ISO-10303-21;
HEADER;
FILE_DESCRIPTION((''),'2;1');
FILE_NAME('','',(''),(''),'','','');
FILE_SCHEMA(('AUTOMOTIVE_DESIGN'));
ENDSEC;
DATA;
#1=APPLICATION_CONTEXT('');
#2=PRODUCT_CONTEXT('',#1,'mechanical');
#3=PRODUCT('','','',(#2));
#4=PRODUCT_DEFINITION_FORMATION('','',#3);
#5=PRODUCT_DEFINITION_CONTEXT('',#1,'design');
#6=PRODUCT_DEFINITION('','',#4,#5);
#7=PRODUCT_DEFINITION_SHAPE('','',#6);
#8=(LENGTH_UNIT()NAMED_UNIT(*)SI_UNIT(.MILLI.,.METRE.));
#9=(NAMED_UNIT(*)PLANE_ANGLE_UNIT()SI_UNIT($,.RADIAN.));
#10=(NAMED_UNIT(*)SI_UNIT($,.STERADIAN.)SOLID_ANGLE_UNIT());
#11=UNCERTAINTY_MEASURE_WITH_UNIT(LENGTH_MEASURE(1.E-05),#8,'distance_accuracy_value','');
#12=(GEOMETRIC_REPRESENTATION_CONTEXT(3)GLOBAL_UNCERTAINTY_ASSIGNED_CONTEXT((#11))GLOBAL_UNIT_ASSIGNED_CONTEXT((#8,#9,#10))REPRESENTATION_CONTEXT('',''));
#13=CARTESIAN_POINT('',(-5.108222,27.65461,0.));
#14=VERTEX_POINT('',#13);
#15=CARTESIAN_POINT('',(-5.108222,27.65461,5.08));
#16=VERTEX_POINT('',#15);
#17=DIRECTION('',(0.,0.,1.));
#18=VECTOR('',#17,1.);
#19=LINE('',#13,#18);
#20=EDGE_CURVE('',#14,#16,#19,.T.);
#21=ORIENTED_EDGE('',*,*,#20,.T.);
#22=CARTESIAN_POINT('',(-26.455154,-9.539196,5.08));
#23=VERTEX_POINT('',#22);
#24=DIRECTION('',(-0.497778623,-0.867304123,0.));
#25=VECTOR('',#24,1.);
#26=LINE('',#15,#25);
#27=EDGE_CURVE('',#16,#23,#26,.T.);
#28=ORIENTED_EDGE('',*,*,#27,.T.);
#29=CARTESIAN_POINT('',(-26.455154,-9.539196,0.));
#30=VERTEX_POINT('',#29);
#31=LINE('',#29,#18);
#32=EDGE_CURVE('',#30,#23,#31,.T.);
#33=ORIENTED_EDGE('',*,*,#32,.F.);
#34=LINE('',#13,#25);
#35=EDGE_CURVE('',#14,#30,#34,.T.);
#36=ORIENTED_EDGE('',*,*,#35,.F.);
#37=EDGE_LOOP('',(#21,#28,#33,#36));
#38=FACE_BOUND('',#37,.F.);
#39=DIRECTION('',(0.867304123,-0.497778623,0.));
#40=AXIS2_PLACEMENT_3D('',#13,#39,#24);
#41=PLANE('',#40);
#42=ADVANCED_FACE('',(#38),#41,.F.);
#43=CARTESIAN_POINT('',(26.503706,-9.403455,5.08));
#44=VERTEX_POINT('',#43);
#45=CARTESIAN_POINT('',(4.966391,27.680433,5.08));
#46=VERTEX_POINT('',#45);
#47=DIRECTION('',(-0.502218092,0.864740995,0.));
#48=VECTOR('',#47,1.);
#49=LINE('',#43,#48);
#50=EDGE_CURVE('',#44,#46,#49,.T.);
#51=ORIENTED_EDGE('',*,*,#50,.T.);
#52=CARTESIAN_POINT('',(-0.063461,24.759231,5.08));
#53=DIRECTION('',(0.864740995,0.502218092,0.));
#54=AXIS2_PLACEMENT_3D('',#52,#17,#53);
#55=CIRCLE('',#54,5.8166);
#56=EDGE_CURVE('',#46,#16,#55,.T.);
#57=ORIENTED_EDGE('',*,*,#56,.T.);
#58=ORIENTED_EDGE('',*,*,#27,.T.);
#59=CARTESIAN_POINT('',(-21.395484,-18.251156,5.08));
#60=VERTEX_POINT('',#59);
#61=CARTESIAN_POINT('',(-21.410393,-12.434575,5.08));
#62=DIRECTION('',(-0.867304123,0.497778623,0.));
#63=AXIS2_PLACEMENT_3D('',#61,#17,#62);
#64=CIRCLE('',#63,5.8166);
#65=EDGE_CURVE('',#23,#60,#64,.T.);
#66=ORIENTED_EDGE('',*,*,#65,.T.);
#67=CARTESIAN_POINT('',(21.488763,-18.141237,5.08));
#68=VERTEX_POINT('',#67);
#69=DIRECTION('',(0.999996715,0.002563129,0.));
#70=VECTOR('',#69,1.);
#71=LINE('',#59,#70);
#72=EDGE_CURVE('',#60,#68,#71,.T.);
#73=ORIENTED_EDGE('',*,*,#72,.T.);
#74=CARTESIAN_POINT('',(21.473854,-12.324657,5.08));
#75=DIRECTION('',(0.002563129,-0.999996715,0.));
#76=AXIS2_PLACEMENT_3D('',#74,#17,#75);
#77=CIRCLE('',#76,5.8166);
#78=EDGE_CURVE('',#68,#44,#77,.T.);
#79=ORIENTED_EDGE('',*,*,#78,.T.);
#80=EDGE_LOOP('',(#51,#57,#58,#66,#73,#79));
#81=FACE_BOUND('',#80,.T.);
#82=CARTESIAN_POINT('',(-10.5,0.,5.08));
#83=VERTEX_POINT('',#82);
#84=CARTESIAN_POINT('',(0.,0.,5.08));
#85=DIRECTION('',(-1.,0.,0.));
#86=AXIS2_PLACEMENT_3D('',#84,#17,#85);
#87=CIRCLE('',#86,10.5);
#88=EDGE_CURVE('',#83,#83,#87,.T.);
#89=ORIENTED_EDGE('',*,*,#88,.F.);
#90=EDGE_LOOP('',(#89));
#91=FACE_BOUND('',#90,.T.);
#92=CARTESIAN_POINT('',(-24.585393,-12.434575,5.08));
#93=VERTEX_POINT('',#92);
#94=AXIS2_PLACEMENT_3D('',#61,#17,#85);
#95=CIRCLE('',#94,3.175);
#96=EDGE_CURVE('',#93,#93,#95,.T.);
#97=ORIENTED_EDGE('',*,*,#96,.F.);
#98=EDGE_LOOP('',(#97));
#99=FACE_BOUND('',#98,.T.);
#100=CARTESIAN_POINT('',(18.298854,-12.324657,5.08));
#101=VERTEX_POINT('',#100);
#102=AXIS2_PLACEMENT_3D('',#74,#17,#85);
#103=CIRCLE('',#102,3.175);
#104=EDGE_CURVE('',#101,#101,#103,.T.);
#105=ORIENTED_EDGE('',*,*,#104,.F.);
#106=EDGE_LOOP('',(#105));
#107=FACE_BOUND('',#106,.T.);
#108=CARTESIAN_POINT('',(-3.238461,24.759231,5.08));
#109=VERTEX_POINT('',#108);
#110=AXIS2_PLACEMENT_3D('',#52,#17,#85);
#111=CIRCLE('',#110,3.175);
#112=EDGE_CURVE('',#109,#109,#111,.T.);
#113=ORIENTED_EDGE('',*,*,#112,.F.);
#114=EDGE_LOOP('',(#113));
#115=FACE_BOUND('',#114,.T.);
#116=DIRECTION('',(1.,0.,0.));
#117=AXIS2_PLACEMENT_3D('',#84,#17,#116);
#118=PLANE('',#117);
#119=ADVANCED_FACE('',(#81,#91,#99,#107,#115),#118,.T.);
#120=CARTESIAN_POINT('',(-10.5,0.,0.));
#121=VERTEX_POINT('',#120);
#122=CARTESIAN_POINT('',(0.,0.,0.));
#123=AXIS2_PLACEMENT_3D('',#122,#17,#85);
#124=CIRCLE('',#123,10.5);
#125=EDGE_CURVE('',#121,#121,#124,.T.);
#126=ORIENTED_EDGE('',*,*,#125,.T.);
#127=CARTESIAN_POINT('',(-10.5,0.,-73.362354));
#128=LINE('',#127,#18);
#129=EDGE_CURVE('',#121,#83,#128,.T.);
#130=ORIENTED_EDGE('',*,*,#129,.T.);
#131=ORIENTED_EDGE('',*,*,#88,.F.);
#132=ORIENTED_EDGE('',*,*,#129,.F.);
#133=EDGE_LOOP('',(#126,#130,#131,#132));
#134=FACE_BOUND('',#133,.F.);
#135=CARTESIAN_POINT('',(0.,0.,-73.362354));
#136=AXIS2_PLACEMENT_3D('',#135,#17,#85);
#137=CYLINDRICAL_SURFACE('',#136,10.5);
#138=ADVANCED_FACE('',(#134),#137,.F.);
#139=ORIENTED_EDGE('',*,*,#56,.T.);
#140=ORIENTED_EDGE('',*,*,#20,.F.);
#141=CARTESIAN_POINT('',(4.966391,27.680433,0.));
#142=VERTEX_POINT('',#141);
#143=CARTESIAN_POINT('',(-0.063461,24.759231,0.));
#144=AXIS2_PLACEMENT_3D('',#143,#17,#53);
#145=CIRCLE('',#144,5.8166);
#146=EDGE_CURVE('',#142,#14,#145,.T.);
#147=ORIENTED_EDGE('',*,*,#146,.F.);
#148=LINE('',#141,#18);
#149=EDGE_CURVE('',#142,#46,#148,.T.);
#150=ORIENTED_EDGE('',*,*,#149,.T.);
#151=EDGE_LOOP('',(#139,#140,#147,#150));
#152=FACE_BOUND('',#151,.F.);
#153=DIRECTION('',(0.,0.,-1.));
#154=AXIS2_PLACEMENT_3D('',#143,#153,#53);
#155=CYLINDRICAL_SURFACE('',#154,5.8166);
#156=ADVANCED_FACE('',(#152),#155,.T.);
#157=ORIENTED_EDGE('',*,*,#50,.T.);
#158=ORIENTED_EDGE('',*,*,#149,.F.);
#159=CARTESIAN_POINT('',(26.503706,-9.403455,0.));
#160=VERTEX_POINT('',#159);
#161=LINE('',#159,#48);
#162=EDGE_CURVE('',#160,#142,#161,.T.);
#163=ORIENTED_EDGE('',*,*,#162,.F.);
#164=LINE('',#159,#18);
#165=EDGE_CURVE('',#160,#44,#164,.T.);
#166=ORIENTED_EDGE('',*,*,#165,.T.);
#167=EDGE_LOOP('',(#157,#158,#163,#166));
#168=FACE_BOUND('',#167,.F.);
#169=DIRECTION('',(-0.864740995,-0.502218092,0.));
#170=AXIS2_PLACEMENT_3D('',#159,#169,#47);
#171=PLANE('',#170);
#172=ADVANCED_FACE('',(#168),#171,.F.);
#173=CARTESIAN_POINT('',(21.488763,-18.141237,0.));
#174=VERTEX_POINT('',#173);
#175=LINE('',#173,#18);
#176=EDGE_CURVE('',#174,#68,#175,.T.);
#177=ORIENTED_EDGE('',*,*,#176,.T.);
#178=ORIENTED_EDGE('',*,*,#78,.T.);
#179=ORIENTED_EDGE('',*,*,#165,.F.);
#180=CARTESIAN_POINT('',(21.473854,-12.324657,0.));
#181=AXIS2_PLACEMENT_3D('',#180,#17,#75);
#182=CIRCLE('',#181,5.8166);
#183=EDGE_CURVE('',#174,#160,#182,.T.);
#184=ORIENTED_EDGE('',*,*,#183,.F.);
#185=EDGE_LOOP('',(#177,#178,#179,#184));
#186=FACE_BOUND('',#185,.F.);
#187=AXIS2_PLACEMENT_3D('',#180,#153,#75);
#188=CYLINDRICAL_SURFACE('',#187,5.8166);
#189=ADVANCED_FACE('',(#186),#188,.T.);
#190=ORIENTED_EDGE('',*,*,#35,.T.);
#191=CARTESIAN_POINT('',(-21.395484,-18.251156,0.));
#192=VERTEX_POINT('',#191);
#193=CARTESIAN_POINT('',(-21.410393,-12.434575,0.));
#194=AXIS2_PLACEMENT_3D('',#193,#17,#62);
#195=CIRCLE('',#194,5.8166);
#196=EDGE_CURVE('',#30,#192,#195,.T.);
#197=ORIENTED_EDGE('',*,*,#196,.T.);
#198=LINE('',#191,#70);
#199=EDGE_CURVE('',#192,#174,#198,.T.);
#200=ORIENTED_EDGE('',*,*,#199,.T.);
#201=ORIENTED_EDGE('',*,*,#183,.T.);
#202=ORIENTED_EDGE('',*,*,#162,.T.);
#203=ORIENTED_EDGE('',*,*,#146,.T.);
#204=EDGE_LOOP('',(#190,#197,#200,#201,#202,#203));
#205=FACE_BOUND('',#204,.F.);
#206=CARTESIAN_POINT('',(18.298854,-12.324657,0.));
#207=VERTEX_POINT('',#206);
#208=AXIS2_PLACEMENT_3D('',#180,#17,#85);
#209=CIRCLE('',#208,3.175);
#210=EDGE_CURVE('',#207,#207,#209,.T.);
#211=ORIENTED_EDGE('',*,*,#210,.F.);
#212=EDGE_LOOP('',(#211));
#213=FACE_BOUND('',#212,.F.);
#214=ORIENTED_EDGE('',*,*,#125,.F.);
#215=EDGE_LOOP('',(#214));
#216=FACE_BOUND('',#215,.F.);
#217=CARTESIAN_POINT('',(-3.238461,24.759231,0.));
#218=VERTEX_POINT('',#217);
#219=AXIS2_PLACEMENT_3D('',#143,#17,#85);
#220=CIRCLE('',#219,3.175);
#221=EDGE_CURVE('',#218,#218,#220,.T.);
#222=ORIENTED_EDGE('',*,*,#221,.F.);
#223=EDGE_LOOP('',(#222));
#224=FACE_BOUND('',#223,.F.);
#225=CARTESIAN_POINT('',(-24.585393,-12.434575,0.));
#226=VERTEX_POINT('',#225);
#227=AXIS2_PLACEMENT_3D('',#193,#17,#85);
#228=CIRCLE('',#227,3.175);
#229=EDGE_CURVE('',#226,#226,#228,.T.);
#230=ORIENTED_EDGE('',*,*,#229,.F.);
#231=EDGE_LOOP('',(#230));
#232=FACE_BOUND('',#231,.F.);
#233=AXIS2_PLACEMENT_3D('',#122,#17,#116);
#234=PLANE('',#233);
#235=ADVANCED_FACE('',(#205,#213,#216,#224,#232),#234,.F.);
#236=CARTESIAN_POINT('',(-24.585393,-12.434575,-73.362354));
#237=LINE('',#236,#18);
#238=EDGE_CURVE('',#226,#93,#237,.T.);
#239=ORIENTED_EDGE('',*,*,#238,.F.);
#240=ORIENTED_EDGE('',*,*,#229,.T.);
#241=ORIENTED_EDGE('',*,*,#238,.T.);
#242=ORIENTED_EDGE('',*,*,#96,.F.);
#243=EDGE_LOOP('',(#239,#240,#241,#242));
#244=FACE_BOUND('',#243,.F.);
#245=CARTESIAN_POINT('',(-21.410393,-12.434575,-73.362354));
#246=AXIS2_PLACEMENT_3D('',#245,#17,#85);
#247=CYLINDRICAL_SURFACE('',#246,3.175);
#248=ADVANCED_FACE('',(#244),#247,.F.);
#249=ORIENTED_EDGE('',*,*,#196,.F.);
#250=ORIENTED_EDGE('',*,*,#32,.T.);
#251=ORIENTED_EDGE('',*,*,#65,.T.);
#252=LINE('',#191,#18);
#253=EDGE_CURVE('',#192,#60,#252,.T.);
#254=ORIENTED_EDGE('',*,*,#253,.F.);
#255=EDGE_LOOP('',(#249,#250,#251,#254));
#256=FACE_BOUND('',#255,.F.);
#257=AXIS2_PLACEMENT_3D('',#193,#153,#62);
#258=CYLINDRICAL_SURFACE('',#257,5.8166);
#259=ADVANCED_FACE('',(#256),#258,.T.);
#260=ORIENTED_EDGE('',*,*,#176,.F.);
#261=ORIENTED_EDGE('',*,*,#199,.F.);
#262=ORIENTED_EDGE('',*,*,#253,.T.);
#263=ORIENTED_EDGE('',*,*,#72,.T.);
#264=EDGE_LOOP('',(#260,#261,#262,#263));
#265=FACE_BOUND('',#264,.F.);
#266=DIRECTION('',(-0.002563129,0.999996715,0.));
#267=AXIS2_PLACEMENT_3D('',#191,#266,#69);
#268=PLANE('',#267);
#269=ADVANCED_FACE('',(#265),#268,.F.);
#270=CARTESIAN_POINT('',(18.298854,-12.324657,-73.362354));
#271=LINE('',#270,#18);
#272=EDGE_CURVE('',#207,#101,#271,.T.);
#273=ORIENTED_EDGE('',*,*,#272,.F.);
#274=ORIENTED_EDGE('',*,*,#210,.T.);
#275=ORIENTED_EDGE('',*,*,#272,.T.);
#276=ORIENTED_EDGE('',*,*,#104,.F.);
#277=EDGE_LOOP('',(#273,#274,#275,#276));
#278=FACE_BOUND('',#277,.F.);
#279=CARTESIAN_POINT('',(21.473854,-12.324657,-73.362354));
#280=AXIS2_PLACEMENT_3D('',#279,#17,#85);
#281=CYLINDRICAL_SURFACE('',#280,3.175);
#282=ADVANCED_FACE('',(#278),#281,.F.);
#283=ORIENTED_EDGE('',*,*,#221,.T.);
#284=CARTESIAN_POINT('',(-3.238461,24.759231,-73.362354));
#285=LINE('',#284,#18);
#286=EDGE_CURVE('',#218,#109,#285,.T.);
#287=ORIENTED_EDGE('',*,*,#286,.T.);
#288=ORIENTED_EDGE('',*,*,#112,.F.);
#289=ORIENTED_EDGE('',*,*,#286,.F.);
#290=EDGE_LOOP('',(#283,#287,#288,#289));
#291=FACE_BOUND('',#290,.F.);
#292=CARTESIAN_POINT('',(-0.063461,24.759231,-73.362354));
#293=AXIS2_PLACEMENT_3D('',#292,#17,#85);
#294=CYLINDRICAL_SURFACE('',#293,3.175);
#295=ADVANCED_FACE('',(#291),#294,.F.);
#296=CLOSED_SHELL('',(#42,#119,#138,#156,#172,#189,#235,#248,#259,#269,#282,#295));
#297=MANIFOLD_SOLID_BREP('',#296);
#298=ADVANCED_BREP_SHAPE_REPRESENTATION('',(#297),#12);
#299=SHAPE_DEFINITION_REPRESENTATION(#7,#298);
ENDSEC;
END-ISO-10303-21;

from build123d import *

# Parameters (mm, degrees)
F1_DEPTH = 5.08
F2_D     = 21
F3_D     = 6.35
F4_D     = 6.35
F5_D     = 6.35


with BuildPart() as f1:
    # F0 (on Top) → F1 (new body)
    with BuildSketch(Plane.XY):
        with BuildLine():
            Line((26.5037064396, -9.4034548087), (4.9663911618, 27.6804330928))
            ThreePointArc((4.9663911618, 27.6804330928), (-0.0783700027, 30.5758122309), (-5.1082224721, 27.6546104755))
            Line((-5.1082224721, 27.6546104755), (-26.455153827, -9.5391956352))
            ThreePointArc((-26.455153827, -9.5391956352), (-26.440245132, -15.3557765287), (-21.3954839675, -18.2511556668))
            Line((-21.3954839675, -18.2511556668), (21.4887626653, -18.1412374576))
            ThreePointArc((21.4887626653, -18.1412374576), (26.5186151347, -15.2200357022), (26.5037064396, -9.4034548087))
        make_face()
    extrude(amount=F1_DEPTH)

    # F2 (through all)
    with Locations(Plane(origin=(0, 0, 0), x_dir=(1, 0, 0), z_dir=(0, 0, -1))):
        with Locations((0, 0)):
            Hole(F2_D / 2)

    # F3 (through all)
    with Locations(Plane(origin=(0, 0, 0), x_dir=(1, 0, 0), z_dir=(0, 0, -1))):
        with Locations((-21.4103926626, 12.4345747733)):
            Hole(F3_D / 2)

    # F4 (through all)
    with Locations(Plane(origin=(0, 0, 0), x_dir=(1, 0, 0), z_dir=(0, 0, -1))):
        with Locations((21.4738539702, 12.3246565641)):
            Hole(F4_D / 2)

    # F5 (through all)
    with Locations(Plane(origin=(0, 0, 0), x_dir=(1, 0, 0), z_dir=(0, 0, -1))):
        with Locations((-0.0634613077, -24.7592313374)):
            Hole(F5_D / 2)


solid = f1.part
